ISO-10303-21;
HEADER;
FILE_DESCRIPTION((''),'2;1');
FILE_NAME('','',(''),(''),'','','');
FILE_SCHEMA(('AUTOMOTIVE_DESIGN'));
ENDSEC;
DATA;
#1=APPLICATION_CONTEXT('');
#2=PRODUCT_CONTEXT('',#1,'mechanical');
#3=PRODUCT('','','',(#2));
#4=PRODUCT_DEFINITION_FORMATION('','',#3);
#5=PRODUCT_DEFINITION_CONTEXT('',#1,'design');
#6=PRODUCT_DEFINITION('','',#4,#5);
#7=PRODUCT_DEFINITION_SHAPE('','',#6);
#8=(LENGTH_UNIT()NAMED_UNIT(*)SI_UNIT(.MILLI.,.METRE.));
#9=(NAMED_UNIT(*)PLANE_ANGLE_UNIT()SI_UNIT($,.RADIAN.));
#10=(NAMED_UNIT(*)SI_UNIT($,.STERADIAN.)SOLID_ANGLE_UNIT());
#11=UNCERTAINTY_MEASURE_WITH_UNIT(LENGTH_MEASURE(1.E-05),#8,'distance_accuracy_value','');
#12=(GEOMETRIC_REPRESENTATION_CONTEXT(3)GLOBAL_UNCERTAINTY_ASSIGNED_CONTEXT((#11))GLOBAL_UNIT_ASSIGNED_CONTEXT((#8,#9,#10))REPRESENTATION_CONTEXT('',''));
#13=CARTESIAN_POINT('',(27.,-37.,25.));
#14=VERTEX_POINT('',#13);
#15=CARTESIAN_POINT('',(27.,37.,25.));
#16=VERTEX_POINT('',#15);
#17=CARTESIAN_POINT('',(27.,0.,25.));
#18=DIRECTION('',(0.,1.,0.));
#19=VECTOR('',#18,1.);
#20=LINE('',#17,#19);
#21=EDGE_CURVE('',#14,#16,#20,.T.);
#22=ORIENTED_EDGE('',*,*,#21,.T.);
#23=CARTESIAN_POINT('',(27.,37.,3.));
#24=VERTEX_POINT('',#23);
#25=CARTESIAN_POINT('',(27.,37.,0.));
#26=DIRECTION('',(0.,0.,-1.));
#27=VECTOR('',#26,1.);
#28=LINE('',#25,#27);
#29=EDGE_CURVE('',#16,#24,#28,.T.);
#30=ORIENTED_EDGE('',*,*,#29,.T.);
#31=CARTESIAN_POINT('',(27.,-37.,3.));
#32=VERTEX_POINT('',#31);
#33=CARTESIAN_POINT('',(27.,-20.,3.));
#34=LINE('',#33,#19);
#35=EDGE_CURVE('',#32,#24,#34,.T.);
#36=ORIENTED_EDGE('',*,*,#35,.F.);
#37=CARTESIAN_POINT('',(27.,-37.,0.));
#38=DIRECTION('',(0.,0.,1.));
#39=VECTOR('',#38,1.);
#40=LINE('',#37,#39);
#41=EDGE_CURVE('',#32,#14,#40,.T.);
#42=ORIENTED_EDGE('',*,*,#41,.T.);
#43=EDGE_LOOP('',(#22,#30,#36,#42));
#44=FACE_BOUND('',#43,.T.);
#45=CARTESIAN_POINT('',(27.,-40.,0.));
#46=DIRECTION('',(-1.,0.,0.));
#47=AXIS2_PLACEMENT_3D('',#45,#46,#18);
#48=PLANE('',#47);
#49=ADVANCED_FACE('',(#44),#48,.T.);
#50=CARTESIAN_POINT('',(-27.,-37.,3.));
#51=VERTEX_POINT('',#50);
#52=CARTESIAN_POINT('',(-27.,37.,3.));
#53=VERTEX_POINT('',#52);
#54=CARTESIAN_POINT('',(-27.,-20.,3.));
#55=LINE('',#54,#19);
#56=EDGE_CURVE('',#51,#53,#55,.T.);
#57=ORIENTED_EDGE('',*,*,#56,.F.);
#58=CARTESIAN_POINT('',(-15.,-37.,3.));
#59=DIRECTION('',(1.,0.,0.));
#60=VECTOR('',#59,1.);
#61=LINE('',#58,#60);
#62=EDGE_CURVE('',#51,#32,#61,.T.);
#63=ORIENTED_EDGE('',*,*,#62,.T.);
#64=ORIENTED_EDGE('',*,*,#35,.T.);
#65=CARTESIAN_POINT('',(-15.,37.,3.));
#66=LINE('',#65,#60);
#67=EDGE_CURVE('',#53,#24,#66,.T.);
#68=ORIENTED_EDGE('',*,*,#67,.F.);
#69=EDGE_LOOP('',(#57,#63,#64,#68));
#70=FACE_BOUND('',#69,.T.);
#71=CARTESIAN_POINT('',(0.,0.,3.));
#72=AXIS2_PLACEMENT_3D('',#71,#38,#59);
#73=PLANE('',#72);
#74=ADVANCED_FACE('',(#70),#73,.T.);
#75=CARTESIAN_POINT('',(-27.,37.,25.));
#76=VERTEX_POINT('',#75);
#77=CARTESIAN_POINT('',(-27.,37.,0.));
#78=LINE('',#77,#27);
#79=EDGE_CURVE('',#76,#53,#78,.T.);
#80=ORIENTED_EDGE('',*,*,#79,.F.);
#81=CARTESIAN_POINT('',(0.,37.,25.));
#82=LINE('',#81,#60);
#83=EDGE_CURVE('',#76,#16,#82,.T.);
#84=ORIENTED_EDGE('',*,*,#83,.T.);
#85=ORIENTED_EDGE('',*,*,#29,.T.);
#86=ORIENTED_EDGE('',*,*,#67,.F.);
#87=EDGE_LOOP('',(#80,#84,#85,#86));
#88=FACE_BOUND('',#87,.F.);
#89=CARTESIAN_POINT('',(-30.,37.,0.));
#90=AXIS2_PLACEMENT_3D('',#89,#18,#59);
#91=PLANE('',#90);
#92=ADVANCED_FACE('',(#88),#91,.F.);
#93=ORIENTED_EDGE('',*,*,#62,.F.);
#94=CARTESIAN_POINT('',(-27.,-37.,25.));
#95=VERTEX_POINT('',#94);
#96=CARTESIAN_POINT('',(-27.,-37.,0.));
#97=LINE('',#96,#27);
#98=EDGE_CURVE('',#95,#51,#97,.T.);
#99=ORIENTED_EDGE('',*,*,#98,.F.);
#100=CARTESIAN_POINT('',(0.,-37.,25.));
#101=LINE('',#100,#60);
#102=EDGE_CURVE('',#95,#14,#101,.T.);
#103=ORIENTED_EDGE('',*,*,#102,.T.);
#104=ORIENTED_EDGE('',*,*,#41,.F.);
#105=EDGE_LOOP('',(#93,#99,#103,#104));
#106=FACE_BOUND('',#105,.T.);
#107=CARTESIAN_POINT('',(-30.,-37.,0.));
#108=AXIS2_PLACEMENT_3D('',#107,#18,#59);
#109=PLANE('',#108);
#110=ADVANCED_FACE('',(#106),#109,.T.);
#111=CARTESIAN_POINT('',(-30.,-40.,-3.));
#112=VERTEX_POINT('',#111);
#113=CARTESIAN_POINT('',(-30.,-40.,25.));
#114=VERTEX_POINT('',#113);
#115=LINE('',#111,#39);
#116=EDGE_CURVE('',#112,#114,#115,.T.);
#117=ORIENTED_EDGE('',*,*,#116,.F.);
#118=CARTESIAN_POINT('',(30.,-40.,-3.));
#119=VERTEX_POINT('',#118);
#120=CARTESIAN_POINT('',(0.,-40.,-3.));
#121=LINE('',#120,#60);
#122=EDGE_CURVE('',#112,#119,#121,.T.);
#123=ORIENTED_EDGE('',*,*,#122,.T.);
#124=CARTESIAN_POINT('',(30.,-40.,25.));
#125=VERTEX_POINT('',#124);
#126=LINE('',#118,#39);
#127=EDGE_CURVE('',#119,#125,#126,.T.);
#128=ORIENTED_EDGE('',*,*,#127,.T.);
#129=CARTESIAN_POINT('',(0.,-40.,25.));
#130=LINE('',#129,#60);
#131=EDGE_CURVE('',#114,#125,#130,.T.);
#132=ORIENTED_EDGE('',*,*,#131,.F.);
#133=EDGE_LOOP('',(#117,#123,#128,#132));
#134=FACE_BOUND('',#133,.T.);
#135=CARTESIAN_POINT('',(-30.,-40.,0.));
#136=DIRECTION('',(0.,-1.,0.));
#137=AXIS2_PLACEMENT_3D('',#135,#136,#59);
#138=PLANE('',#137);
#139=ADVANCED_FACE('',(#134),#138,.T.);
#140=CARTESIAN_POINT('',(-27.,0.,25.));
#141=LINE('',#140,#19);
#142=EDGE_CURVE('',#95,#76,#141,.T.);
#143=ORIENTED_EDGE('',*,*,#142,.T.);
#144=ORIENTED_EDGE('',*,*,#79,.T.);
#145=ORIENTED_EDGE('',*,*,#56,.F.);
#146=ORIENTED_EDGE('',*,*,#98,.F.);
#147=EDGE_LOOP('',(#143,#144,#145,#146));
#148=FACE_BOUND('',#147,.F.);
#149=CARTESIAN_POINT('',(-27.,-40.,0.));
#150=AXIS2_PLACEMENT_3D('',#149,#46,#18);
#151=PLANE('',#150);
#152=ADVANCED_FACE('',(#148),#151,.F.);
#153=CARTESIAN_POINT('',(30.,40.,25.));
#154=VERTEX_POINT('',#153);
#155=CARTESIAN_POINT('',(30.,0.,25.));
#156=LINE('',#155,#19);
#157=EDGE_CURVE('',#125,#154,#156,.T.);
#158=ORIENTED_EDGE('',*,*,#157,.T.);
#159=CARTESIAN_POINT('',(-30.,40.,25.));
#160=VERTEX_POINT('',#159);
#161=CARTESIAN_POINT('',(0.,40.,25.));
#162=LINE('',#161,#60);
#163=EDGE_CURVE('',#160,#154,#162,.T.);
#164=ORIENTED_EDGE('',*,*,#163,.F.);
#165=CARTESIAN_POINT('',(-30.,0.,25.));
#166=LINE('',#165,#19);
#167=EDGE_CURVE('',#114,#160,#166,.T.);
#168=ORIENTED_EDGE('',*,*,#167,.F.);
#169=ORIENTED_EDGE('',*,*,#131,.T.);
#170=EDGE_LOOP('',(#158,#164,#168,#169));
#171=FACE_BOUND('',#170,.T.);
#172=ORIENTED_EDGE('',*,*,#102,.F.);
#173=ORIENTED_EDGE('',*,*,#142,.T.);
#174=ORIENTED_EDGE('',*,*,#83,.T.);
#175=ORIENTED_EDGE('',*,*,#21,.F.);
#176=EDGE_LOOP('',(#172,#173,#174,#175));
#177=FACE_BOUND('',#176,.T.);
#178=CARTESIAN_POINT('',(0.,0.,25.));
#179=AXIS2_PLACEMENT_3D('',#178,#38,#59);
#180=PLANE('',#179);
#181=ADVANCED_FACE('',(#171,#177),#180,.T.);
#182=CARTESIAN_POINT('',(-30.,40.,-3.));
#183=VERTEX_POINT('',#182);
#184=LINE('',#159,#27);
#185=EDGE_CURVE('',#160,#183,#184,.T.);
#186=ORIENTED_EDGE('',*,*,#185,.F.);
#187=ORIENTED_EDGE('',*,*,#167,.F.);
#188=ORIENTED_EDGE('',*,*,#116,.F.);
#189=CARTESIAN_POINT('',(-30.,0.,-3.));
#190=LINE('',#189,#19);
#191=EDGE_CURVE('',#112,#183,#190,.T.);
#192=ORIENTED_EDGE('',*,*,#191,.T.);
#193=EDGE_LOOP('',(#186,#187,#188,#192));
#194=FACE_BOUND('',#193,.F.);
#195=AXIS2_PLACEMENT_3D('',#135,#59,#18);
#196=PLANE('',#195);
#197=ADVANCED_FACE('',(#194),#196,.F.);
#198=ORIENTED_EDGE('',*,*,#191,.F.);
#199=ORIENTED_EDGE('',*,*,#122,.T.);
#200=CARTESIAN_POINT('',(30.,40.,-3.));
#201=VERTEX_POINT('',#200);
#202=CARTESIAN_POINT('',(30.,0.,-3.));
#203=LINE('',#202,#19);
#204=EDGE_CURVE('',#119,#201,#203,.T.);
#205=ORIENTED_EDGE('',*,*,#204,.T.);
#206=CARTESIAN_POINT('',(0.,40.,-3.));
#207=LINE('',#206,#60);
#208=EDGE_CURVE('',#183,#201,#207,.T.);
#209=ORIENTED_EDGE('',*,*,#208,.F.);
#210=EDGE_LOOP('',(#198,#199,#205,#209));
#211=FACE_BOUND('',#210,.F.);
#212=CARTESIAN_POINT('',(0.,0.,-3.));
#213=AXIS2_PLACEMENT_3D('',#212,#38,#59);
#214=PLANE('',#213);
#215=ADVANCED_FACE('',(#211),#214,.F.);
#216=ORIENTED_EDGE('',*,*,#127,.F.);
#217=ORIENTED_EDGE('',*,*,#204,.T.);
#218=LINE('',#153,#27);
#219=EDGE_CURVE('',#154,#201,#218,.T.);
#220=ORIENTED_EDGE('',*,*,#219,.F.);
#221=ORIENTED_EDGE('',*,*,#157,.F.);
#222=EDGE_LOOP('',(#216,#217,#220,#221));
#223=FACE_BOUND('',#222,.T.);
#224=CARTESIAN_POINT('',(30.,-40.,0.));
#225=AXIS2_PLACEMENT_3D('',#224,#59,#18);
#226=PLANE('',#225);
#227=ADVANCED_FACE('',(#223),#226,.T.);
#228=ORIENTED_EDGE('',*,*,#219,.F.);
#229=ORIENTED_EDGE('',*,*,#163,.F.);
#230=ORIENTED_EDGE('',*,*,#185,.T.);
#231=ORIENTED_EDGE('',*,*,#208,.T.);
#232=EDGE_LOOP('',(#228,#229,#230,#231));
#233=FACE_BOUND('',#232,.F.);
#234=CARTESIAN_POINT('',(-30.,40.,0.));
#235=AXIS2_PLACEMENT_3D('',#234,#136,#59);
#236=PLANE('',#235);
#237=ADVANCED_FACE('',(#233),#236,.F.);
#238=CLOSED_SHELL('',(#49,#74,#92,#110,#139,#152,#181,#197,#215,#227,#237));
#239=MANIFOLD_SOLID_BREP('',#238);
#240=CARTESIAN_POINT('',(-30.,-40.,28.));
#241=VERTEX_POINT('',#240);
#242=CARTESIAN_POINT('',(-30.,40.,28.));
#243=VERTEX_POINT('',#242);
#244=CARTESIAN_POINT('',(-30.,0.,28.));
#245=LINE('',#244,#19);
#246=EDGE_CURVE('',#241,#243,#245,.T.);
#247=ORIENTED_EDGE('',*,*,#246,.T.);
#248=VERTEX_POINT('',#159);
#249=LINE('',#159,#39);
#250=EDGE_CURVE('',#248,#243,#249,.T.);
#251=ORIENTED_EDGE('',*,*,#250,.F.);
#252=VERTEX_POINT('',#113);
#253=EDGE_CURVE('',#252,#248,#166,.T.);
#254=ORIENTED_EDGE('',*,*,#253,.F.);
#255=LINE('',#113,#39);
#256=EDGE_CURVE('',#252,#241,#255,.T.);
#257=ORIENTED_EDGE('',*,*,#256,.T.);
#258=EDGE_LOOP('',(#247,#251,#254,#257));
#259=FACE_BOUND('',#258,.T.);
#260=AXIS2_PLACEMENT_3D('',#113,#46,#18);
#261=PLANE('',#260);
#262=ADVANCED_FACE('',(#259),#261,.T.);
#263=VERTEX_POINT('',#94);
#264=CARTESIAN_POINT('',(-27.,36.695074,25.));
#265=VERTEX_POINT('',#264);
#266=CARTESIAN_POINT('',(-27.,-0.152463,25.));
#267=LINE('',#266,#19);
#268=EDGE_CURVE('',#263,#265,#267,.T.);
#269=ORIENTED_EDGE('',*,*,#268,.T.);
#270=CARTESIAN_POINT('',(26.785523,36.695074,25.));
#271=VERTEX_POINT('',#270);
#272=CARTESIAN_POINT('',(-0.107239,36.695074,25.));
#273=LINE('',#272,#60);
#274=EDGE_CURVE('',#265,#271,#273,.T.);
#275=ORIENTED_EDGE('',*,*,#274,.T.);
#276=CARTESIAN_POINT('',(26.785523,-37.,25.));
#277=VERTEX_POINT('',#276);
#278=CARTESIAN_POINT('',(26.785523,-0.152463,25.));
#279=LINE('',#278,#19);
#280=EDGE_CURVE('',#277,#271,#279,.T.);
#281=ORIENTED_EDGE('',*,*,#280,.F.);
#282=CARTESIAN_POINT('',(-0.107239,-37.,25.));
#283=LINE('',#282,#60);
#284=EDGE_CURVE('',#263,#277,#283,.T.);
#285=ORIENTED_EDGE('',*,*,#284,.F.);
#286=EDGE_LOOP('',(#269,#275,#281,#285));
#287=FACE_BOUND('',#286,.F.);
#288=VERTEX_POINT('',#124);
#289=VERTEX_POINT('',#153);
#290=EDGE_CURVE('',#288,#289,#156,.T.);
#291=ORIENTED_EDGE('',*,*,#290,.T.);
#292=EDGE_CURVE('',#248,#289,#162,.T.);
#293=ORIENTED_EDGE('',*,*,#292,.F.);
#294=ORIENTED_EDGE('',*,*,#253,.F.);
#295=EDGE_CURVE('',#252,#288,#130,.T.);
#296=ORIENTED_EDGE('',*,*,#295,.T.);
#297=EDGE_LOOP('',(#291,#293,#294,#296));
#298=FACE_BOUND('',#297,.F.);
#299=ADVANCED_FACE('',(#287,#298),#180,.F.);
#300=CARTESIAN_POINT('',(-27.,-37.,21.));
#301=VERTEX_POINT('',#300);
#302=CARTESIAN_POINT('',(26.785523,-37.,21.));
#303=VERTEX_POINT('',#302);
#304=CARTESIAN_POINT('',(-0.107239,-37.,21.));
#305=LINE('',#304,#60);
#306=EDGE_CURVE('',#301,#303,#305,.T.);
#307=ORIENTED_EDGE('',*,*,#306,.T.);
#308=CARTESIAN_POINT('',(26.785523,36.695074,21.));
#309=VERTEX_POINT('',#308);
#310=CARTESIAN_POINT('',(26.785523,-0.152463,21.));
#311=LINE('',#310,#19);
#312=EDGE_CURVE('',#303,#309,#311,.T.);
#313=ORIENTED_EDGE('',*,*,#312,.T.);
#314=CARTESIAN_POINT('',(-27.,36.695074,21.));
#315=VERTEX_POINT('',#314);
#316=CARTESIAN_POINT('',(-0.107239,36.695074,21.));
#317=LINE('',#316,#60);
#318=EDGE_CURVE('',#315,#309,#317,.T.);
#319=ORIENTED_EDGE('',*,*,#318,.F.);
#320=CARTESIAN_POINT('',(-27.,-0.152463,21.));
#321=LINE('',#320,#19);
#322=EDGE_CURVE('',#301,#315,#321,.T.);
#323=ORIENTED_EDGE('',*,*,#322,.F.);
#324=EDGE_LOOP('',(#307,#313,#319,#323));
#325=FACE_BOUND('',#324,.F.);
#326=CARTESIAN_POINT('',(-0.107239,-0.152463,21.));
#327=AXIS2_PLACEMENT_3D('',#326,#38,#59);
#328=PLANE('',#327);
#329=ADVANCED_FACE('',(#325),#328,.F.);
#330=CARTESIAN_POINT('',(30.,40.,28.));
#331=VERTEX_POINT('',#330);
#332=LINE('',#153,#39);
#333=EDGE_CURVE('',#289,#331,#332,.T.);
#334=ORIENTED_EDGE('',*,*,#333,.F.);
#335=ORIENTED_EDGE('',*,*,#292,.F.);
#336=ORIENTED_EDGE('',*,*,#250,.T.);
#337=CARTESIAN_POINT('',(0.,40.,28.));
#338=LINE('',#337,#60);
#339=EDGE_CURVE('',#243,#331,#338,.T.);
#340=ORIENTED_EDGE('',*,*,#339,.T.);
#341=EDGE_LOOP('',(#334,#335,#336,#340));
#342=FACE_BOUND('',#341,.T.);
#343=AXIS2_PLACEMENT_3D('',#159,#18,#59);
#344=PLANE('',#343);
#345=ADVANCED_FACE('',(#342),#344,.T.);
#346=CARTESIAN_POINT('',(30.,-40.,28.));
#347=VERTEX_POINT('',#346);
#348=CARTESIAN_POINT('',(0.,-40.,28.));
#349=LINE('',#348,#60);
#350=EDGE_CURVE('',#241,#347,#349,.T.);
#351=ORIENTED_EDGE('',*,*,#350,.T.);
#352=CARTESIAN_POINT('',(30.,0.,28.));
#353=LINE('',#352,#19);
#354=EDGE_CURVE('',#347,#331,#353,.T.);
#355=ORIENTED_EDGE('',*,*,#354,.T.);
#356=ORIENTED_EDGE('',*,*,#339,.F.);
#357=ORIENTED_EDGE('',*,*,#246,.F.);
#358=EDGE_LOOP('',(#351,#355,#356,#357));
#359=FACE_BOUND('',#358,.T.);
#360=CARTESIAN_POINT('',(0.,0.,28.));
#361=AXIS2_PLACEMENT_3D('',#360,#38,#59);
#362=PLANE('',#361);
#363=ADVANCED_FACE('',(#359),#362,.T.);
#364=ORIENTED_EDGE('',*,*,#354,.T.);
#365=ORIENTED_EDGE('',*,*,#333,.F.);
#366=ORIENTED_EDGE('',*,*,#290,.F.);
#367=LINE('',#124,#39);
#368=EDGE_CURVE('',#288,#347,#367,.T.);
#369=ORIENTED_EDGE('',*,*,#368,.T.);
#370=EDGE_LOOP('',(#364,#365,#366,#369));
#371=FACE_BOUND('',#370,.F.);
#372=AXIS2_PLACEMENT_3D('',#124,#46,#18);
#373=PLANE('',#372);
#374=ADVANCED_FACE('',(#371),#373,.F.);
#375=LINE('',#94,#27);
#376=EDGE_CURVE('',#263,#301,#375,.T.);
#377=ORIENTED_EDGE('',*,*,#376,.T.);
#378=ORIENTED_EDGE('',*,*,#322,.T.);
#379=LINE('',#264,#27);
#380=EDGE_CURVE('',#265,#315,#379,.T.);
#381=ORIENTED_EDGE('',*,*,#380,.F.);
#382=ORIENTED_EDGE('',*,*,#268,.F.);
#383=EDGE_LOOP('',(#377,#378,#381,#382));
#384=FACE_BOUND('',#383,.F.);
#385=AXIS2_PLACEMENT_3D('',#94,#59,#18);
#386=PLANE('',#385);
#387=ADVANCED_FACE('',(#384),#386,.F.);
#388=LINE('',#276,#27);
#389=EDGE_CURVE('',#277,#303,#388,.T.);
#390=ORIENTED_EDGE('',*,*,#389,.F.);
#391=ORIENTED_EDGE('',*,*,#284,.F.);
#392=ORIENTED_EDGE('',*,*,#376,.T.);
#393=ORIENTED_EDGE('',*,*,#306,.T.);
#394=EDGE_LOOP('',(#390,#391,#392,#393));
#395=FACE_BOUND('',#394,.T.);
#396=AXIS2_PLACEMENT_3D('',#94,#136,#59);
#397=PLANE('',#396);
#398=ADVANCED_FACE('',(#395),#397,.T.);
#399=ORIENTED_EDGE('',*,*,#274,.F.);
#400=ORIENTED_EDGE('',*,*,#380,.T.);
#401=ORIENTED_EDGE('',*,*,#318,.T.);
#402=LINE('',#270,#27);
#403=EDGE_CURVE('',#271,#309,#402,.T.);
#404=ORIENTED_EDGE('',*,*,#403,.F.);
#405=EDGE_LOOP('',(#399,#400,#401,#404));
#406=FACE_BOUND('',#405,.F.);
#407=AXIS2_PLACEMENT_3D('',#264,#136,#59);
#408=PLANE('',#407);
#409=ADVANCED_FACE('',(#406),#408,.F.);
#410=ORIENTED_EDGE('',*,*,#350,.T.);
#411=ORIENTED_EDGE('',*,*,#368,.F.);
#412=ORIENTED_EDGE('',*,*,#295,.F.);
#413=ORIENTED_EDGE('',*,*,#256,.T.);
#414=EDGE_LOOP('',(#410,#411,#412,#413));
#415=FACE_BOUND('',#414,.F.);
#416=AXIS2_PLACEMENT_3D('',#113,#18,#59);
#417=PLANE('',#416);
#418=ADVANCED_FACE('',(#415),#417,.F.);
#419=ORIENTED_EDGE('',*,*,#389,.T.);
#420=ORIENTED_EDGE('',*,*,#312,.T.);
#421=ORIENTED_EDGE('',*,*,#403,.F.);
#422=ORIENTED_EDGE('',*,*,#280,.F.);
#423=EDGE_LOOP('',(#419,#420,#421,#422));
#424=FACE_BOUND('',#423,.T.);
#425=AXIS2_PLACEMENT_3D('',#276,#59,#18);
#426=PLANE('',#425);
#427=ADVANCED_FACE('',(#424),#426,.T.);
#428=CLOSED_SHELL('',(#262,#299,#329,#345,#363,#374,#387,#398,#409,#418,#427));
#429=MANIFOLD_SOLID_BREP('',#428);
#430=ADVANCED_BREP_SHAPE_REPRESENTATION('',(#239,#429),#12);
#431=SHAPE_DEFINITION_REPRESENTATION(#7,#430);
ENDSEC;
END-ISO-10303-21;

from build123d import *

# Parameters (mm, degrees)
F0_W     = 60
F0_H     = 80
F1_DEPTH = 25
F2_T     = -3
F4_DEPTH = 3
F3_W     = 60
F3_H     = 80
F3_W_2   = 54
F3_H_2   = 74
F6_DEPTH = 3
F5_W     = 53.7855226994
F5_H     = 73.69507429
F7_DEPTH = 4


# Not quite as in the source:
# - the program builds the solid bodies; features that only make, move or delete a surface that nothing else refers to are left out


with BuildPart() as f1:
    # F0 (on Top) → F1 (new body)
    with BuildSketch(Plane.XY):
        Rectangle(F0_W, F0_H)
    extrude(amount=F1_DEPTH)

    # F2
    f2_openings = [f1.faces().sort_by_distance(p)[0] for p in [
        (0, 0, 25),
    ]]
    offset(amount=F2_T, openings=f2_openings)

    # F4 (add): a face of the model
    f4_faces = [f1.faces().sort_by_distance(p)[0] for p in [
        (0, 0, 0),
    ]]
    extrude(f4_faces, amount=F4_DEPTH)


with BuildPart() as f6:
    # F3 (on face) → F6 (new body)
    with BuildSketch(Plane.XY.offset(25)):
        Rectangle(F3_W, F3_H)
        Rectangle(F3_W_2, F3_H_2, mode=Mode.SUBTRACT)
        Rectangle(F3_W_2, F3_H_2)
    extrude(amount=F6_DEPTH)

    # F5 (on face) → F7 (join)
    with BuildSketch(Plane.XY.offset(25)):
        with Locations((-0.1072386503, -0.152462855)):
            Rectangle(F5_W, F5_H)
    extrude(amount=-F7_DEPTH)


solid = Compound([f1.part, f6.part])
